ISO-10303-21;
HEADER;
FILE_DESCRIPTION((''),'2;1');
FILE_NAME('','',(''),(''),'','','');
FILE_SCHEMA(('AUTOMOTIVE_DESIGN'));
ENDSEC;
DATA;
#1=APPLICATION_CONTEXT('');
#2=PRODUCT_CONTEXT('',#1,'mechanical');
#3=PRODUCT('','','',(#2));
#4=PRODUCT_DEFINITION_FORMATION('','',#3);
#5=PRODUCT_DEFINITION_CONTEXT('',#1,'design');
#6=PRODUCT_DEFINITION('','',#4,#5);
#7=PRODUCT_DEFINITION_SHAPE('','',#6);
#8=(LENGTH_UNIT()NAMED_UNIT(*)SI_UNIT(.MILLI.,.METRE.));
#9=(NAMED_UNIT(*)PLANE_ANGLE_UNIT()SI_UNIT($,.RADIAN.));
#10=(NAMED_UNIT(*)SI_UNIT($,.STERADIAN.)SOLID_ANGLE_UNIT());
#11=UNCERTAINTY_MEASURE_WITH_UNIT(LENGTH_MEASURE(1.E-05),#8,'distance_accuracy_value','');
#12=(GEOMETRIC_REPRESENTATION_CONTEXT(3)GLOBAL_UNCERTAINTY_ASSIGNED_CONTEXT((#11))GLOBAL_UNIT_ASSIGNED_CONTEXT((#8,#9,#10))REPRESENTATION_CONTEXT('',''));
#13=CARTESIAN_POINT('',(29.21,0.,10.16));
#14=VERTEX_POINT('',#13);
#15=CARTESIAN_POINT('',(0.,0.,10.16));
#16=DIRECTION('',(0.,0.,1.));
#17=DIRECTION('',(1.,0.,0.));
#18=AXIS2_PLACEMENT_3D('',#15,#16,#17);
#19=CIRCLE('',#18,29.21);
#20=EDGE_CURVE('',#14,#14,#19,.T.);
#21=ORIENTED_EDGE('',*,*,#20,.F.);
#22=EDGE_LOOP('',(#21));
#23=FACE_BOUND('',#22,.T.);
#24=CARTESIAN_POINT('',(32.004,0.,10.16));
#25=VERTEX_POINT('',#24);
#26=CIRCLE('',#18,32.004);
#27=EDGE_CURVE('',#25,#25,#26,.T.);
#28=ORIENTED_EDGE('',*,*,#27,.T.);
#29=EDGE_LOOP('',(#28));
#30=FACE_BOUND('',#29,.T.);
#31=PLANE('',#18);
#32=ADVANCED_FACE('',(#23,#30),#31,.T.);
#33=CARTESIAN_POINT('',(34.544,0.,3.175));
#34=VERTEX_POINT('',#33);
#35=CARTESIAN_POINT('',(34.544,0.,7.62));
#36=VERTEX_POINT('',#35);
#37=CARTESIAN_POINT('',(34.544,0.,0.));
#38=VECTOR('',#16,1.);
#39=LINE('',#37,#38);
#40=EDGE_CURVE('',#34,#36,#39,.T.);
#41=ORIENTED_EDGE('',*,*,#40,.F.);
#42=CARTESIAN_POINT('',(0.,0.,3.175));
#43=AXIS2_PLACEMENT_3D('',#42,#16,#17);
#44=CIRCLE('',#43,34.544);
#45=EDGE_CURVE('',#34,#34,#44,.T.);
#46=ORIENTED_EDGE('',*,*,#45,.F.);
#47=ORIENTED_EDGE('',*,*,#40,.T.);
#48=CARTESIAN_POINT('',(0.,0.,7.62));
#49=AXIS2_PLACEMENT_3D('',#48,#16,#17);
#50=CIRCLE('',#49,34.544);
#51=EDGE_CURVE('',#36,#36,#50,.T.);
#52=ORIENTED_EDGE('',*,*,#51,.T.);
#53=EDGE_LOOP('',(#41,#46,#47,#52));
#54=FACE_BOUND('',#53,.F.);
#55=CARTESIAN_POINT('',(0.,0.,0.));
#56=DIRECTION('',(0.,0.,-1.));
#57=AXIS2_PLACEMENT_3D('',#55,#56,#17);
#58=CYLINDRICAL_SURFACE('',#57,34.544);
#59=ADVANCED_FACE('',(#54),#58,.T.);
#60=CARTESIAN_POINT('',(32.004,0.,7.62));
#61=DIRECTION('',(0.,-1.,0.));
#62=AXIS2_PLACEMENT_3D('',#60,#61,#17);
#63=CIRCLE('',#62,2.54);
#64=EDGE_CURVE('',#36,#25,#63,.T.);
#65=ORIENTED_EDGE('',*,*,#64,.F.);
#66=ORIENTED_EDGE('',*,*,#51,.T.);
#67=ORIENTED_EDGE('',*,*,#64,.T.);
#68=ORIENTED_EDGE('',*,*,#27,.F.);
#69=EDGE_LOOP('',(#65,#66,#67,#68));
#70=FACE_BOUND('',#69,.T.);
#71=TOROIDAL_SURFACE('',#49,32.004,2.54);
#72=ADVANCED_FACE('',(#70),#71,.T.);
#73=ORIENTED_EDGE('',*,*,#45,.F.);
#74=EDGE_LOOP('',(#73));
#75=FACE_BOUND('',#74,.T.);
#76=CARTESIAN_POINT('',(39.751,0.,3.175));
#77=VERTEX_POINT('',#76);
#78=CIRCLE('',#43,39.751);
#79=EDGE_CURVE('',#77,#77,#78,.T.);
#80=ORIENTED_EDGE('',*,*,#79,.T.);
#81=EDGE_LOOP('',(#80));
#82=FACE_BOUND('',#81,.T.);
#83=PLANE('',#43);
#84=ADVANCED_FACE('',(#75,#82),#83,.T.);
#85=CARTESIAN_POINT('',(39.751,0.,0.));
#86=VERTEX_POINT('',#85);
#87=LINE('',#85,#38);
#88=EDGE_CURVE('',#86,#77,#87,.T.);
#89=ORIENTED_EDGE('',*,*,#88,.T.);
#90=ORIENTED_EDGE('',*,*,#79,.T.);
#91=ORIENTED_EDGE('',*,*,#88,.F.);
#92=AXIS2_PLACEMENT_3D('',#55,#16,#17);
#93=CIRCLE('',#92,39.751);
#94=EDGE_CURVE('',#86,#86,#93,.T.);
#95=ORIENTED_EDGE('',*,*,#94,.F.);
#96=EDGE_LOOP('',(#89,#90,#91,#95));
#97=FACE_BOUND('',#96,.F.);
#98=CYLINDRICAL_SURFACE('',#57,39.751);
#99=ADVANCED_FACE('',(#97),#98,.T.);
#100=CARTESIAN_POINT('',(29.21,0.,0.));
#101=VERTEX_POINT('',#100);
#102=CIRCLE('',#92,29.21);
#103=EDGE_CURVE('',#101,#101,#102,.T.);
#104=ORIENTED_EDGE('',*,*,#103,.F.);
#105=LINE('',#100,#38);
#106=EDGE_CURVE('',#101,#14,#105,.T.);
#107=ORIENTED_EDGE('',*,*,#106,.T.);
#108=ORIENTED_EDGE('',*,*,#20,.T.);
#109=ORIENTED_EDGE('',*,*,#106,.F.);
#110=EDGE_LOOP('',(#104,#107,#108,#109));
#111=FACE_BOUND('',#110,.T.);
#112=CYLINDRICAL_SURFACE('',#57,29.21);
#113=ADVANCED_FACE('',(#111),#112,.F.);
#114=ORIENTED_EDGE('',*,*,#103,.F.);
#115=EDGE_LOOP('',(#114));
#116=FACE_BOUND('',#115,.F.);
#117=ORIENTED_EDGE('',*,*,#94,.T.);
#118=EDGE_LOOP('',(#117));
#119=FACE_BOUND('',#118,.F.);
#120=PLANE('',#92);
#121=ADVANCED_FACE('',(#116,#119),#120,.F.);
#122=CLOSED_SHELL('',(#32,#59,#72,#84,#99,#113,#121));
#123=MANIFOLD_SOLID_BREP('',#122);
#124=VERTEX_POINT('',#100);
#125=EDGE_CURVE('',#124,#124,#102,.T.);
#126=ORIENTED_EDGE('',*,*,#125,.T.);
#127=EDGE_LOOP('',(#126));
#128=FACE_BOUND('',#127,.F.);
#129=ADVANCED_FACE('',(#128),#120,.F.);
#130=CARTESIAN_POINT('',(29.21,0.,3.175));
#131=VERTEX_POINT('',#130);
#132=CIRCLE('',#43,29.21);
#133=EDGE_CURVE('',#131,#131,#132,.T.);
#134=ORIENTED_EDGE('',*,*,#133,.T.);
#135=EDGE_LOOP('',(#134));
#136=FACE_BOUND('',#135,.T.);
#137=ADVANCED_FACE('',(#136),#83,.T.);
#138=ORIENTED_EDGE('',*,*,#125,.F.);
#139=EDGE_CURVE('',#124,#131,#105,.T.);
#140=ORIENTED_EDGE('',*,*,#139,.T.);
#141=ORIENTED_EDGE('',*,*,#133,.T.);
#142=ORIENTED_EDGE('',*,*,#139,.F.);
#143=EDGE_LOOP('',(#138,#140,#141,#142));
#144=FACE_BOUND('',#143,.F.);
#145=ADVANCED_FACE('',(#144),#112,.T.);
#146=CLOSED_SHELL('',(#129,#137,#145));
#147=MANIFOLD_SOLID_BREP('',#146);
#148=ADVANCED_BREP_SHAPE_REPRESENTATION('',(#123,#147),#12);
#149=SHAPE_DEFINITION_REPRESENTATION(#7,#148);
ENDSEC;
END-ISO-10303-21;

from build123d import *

# Parameters (mm, degrees)
F0_R     = 39.751
F0_R_2   = 34.544
F1_DEPTH = 3.175
F0_R_3   = 29.21
F2_DEPTH = 10.16
F3_R     = 2.54


with BuildPart() as f1:
    # F0 (on Top) → F1 (new body)
    with BuildSketch(Plane.XY):
        Circle(F0_R)
        Circle(F0_R_2, mode=Mode.SUBTRACT)
    extrude(amount=F1_DEPTH)

    # F0 (on Top) → F2 (join)
    with BuildSketch(Plane.XY):
        Circle(F0_R_2)
        Circle(F0_R_3, mode=Mode.SUBTRACT)
    extrude(amount=F2_DEPTH)

    # F3
    f3_edges = [f1.edges().sort_by_distance(p)[0] for p in [
        (-34.544, 0, 10.16),
    ]]
    fillet(f3_edges, radius=F3_R)


with BuildPart() as f1b:
    # F0 (on Top) → F1, piece 2 (new body)
    with BuildSketch(Plane.XY):
        Circle(F0_R_3)
    extrude(amount=F1_DEPTH)


solid = Compound([f1.part, f1b.part])
